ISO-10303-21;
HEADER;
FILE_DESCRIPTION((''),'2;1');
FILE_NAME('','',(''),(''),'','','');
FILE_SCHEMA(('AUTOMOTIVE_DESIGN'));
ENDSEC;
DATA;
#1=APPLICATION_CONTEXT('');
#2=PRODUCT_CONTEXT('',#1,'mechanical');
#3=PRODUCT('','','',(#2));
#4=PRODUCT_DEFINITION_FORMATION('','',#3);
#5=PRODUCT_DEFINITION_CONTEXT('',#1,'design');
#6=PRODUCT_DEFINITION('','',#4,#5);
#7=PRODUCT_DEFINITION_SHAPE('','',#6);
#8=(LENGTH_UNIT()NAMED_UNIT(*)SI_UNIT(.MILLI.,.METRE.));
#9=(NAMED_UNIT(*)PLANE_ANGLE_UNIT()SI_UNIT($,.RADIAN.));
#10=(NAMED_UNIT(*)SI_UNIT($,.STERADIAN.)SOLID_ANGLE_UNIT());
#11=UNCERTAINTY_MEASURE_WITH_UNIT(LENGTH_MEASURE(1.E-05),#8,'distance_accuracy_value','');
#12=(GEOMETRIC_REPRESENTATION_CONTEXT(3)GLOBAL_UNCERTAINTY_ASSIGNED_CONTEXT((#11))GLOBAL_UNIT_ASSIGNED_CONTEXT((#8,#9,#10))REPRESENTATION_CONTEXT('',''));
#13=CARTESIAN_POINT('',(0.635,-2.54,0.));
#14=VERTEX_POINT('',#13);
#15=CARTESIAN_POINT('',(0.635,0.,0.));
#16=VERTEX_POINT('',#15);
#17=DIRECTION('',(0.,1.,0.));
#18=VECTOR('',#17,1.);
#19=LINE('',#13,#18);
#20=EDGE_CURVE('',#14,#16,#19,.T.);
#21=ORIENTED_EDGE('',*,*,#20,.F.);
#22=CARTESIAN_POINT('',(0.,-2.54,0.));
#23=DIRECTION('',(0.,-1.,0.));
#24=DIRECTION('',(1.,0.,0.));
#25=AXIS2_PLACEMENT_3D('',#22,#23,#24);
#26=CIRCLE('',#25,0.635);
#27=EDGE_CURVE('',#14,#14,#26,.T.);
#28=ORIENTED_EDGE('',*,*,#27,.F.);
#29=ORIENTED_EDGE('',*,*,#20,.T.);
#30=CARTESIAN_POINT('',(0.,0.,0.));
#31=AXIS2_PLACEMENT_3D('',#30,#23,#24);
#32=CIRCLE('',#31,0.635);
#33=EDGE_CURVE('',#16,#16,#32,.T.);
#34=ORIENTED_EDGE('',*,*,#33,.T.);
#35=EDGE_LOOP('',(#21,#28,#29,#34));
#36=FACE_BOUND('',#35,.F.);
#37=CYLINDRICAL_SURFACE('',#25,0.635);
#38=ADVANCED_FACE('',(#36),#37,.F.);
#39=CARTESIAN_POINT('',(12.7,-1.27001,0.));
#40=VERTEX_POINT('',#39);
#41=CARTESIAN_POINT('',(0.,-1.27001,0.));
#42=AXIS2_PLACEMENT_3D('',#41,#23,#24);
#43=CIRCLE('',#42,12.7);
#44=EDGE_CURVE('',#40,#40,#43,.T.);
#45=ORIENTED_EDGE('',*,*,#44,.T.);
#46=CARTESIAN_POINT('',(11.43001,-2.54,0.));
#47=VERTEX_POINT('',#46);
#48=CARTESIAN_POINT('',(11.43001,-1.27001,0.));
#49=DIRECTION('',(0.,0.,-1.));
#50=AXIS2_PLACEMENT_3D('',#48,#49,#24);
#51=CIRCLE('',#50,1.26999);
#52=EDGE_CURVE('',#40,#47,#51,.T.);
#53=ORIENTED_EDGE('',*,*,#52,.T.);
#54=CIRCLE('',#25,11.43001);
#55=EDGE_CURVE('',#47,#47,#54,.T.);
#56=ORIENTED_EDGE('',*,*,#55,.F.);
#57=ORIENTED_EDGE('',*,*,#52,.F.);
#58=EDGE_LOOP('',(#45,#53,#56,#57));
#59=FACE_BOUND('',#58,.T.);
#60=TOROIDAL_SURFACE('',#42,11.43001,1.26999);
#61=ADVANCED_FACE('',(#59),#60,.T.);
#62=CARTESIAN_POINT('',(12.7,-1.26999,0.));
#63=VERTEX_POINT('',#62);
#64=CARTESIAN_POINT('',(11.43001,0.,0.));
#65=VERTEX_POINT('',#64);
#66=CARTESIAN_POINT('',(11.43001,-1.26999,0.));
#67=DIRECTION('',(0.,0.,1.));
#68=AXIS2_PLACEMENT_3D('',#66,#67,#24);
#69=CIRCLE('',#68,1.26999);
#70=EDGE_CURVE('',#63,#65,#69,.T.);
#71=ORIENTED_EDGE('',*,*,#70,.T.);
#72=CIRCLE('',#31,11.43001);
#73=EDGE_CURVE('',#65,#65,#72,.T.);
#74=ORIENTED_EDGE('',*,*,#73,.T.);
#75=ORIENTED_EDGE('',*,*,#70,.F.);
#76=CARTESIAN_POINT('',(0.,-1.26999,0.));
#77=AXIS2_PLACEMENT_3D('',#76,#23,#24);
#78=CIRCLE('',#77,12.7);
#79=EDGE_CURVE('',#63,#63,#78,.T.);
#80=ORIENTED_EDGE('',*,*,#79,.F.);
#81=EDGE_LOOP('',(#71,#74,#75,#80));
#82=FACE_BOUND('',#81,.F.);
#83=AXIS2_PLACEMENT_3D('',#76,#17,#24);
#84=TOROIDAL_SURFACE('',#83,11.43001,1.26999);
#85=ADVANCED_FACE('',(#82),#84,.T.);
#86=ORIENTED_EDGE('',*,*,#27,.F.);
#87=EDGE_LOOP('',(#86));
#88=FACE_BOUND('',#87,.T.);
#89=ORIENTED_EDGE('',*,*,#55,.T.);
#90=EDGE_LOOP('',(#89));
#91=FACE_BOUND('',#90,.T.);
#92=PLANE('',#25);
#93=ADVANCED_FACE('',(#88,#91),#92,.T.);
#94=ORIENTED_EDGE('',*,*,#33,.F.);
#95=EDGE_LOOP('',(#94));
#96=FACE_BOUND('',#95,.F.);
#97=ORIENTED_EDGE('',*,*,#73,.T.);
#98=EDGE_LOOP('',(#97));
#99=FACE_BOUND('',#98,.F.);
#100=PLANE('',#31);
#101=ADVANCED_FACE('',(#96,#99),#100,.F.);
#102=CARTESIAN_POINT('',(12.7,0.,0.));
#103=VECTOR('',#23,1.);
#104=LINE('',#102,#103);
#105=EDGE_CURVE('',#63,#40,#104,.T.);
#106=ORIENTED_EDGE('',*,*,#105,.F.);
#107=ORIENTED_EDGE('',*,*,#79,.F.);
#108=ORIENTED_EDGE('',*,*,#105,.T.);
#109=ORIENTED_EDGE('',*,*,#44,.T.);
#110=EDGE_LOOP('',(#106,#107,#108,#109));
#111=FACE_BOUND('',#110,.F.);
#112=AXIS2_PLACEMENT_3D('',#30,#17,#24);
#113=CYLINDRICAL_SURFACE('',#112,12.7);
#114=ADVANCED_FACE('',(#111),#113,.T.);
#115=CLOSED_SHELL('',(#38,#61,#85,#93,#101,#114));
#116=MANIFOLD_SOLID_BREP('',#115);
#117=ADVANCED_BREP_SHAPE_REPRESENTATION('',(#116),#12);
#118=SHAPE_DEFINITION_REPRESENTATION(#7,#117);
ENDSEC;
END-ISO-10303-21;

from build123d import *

# Parameters (mm, degrees)
F0_R     = 12.7
F1_DEPTH = 2.54
F2_R     = 0.635
F3_DEPTH = 25.4
F4_R     = 1.26999


# Not quite as in the source:
# - a fillet or chamfer is up to 0.001 mm smaller than in the source, because OpenCascade refuses the exact size


with BuildPart() as f1:
    # F0 (on Front) → F1 (new body)
    with BuildSketch(Plane.XZ):
        Circle(F0_R)
    extrude(amount=F1_DEPTH)

    # F2 (on face) → F3 (cut)
    with BuildSketch(Plane.XZ.offset(2.54)):
        Circle(F2_R)
    extrude(amount=-F3_DEPTH, mode=Mode.SUBTRACT)

    # F4 (radius 1.27 in the source; OpenCascade refuses exactly that, so slightly less here)
    f4_edges = [f1.edges().sort_by_distance(p)[0] for p in [
        (-12.7, -2.54, 0),
        (-12.7, 0, 0),
    ]]
    fillet(f4_edges, radius=F4_R)


solid = f1.part
